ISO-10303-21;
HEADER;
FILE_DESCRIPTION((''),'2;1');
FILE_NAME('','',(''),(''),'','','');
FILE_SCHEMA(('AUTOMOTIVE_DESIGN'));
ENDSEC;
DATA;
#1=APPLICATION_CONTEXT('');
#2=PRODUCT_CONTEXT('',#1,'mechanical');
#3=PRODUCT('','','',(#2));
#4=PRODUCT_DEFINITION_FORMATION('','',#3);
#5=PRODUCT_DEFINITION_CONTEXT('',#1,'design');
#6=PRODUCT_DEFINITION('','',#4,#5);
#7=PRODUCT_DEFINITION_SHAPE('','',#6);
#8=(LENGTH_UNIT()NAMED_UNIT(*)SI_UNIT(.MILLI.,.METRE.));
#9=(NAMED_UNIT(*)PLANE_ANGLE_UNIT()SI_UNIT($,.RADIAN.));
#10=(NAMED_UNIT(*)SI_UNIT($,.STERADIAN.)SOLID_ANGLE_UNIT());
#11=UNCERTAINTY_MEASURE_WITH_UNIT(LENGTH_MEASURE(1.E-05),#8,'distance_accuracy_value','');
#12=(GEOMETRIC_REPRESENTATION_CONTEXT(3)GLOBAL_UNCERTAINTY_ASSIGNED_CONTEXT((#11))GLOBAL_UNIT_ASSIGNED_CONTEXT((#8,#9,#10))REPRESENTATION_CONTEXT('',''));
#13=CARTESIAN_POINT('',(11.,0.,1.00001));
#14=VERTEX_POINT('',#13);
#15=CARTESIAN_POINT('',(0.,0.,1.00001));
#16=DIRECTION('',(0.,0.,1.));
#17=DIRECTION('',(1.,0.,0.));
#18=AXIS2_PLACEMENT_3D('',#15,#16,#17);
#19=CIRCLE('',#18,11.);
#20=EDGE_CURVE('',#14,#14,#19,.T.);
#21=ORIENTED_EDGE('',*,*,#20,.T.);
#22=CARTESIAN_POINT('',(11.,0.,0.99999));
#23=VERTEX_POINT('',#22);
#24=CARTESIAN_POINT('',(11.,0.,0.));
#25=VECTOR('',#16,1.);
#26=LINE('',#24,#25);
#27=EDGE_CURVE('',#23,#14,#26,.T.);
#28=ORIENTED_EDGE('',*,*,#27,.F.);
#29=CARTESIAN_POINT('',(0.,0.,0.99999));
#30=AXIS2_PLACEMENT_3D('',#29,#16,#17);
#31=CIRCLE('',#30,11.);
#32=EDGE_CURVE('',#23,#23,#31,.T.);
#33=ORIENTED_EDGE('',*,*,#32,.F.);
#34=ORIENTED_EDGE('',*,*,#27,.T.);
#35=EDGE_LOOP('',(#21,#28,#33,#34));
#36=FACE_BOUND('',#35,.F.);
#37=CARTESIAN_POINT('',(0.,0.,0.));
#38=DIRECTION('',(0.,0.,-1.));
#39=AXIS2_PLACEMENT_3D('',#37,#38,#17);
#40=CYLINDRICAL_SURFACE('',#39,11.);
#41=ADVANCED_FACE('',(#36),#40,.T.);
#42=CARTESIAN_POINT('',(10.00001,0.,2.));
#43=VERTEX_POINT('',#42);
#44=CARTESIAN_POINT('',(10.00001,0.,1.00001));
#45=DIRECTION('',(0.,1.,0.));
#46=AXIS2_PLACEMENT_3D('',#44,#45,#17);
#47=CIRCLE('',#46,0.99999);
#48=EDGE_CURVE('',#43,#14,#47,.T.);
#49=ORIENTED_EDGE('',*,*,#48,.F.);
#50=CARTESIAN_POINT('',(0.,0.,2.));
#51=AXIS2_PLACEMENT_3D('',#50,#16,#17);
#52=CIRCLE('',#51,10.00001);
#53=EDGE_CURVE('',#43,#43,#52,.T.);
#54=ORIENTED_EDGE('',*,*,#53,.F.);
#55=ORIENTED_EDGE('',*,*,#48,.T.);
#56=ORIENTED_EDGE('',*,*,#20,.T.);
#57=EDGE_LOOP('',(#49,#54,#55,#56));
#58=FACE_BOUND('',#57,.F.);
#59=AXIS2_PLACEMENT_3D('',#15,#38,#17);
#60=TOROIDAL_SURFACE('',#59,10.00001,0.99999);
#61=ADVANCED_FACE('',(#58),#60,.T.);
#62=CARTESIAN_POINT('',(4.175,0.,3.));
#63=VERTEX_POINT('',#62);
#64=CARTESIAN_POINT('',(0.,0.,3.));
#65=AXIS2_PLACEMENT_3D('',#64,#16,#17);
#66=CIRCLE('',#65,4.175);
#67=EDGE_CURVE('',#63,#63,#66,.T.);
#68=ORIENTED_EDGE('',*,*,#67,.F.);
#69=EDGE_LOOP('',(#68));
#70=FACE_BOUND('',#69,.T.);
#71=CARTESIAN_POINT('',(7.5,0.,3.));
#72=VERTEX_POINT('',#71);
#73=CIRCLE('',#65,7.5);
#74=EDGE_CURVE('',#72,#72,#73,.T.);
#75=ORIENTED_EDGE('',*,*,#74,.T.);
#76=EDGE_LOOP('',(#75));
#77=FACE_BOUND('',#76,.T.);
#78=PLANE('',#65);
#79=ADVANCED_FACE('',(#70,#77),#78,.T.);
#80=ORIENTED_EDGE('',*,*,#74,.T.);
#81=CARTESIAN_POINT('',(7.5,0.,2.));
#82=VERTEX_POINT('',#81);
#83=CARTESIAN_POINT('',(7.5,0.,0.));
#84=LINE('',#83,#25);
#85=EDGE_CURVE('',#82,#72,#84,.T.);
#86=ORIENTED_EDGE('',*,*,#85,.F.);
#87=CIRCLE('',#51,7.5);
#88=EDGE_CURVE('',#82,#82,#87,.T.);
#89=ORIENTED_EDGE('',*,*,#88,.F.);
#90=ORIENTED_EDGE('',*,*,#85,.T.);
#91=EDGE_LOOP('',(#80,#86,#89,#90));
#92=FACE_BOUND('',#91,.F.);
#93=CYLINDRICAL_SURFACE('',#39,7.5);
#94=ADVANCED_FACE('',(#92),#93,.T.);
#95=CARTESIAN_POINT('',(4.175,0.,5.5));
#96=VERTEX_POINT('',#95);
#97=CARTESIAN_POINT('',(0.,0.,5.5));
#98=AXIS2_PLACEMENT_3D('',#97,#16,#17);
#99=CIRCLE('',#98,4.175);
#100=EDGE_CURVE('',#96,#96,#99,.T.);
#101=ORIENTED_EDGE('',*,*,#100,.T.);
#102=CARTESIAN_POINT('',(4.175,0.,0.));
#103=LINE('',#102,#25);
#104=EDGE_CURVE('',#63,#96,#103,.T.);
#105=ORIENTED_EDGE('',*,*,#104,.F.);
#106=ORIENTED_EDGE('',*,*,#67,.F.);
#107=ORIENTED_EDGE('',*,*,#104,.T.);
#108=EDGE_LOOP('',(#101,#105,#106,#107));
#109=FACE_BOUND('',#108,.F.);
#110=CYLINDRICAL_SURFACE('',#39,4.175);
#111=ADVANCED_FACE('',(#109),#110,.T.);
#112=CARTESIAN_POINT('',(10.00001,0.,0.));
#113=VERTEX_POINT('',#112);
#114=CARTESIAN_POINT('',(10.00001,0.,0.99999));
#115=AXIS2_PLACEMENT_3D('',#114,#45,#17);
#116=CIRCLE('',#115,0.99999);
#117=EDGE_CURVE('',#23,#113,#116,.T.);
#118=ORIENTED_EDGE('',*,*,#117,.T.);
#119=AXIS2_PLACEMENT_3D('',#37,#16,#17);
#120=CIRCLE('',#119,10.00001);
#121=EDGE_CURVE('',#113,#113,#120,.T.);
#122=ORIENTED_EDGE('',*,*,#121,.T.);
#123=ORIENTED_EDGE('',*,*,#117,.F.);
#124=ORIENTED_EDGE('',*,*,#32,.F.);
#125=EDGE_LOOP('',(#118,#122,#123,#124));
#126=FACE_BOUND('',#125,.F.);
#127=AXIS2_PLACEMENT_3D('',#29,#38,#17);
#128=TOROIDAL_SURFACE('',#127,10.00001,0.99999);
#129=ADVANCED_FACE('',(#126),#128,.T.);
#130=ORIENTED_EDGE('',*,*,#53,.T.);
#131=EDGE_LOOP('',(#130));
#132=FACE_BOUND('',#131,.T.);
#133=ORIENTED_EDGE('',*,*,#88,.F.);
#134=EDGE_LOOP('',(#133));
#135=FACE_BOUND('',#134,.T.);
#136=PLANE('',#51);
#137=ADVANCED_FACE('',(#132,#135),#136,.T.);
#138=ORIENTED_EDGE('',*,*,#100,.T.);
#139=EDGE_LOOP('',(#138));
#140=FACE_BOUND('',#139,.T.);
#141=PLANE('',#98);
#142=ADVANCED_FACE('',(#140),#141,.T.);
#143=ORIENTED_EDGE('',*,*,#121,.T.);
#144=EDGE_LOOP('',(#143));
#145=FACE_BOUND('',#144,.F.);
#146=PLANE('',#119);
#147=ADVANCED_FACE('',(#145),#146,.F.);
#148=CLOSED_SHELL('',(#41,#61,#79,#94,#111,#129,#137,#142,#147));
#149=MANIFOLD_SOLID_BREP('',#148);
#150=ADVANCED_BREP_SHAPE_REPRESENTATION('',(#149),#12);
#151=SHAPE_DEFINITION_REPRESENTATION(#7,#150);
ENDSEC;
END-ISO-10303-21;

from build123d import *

# Parameters (mm, degrees)
F0_R     = 11
F0_R_2   = 7.5
F1_DEPTH = 2
F0_R_3   = 4.175
F2_DEPTH = 3
F3_DEPTH = 5.5
F4_R     = 0.99999


# Not quite as in the source:
# - a fillet or chamfer is up to 0.001 mm smaller than in the source, because OpenCascade refuses the exact size


with BuildPart() as f1:
    # F0 (on Top) → F1 (new body)
    with BuildSketch(Plane.XY):
        Circle(F0_R)
        Circle(F0_R_2, mode=Mode.SUBTRACT)
    extrude(amount=F1_DEPTH)

    # F0 (on Top) → F2 (join)
    with BuildSketch(Plane.XY):
        Circle(F0_R_2)
        Circle(F0_R_3, mode=Mode.SUBTRACT)
    extrude(amount=F2_DEPTH)

    # F0 (on Top) → F3 (join)
    with BuildSketch(Plane.XY):
        Circle(F0_R_3)
    extrude(amount=F3_DEPTH)

    # F4 (radius 1 in the source; OpenCascade refuses exactly that, so slightly less here)
    f4_edges = [f1.edges().sort_by_distance(p)[0] for p in [
        (-11, 0, 2),
        (-11, 0, 0),
    ]]
    fillet(f4_edges, radius=F4_R)


solid = f1.part
